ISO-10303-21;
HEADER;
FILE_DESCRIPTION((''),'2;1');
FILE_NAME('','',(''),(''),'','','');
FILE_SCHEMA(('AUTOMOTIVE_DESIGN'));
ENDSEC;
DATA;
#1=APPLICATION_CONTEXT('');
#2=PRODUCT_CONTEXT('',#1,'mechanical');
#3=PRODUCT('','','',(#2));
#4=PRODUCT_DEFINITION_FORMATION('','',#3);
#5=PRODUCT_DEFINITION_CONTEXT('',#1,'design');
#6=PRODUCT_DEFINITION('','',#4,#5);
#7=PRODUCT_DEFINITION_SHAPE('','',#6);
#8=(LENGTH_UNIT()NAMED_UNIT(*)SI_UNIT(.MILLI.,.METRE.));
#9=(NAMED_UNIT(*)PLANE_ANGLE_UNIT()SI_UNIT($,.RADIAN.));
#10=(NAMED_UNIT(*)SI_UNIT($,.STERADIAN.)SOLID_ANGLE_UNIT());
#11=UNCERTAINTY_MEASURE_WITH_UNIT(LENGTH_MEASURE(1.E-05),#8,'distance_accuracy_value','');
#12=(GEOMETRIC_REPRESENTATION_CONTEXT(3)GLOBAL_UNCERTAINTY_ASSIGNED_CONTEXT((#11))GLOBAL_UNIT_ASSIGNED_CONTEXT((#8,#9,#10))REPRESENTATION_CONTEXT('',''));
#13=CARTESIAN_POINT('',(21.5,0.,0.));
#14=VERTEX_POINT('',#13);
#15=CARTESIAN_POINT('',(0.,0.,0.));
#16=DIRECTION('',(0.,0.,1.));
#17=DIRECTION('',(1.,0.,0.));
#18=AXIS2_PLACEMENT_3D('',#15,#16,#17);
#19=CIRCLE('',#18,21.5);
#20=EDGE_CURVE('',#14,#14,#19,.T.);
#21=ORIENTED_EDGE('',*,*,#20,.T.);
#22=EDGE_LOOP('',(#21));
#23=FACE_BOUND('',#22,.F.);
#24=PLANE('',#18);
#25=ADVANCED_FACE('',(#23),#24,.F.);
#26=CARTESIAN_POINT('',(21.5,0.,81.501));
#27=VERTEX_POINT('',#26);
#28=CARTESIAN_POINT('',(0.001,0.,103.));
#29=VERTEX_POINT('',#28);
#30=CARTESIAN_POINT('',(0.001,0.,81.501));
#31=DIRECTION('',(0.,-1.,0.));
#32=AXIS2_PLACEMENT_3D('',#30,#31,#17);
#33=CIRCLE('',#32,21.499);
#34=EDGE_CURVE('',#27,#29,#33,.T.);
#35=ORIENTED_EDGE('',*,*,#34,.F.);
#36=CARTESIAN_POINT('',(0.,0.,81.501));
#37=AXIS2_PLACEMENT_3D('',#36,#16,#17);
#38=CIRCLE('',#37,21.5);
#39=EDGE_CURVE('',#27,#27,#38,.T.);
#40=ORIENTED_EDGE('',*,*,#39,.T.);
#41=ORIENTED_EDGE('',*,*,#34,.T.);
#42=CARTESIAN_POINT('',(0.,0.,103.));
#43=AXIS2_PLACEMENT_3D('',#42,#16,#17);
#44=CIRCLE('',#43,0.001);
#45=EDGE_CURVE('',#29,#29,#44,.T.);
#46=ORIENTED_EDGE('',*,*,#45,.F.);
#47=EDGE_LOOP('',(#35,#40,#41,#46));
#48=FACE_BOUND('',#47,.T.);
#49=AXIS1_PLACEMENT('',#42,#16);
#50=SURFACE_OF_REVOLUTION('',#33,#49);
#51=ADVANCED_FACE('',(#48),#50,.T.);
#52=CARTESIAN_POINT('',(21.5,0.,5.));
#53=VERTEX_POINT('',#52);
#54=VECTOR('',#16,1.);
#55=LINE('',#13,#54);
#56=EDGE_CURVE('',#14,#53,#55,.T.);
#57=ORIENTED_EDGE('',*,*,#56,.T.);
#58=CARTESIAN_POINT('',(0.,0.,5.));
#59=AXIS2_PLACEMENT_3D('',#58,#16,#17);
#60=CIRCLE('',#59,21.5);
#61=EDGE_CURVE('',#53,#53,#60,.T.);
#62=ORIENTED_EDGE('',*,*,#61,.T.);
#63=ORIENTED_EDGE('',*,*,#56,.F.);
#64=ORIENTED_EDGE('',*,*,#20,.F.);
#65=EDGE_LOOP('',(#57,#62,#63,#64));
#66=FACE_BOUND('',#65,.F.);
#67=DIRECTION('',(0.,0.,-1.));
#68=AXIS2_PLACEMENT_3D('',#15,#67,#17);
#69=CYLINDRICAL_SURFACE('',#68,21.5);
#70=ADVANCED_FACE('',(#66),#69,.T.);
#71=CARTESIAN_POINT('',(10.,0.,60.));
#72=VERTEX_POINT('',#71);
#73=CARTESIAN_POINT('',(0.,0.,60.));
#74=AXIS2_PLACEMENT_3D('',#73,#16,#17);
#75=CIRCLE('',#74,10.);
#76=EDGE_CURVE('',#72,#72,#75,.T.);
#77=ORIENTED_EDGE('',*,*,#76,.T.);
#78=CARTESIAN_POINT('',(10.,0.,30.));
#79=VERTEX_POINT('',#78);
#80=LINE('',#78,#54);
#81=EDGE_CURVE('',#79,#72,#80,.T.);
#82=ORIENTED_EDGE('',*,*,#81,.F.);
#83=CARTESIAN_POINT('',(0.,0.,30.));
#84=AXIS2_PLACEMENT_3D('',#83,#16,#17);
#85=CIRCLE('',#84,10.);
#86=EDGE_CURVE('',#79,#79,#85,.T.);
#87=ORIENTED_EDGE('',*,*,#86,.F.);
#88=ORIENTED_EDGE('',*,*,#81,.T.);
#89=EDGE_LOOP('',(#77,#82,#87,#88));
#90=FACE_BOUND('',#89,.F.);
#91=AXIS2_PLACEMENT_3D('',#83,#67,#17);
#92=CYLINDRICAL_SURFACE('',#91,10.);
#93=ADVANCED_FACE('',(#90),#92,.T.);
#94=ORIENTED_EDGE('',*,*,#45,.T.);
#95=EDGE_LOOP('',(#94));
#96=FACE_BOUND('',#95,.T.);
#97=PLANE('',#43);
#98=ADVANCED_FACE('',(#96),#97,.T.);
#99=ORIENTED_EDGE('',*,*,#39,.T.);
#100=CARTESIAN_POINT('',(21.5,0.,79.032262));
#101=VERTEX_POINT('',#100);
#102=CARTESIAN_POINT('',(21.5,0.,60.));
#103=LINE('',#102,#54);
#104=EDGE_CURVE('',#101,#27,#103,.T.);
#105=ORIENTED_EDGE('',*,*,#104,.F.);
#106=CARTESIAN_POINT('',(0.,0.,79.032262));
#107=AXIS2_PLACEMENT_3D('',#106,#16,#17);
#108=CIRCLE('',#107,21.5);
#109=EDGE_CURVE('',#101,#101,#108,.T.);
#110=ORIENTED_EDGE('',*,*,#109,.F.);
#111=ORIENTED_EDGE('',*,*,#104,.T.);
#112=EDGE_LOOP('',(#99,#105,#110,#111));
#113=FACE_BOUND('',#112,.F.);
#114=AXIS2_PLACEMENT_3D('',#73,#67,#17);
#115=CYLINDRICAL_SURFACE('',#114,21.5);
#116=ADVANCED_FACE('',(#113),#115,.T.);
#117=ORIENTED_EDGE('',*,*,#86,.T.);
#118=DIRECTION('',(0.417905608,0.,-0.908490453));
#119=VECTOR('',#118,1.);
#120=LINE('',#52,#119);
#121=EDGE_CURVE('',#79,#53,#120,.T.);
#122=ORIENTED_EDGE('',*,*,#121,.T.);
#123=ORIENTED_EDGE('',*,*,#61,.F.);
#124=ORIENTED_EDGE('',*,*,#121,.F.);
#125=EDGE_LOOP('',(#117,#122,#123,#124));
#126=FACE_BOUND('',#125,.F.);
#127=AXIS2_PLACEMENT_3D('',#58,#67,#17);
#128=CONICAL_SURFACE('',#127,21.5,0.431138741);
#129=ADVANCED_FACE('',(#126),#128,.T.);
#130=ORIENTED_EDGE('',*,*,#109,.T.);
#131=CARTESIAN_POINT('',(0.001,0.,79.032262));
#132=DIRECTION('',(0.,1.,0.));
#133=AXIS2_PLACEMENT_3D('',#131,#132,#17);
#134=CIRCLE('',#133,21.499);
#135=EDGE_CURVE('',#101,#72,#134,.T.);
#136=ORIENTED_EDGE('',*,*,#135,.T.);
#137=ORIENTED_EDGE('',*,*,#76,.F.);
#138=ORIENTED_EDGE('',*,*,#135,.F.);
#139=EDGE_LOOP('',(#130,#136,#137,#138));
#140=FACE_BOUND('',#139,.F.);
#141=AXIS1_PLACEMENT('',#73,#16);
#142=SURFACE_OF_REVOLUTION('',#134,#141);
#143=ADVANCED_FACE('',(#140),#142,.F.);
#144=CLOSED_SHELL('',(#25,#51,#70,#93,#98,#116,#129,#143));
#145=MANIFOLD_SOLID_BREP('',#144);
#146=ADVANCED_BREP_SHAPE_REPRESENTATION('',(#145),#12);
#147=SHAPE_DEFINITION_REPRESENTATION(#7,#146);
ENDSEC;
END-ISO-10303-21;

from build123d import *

# Parameters (mm, degrees)
F0_R     = 21.5
F1_DEPTH = 30
F2_SIZE2 = 25
F2_SIZE  = 11.5
F3_DEPTH = 30
F4_R     = 21.5
F5_DEPTH = 43


# Not quite as in the source:
# - a fillet or chamfer that OpenCascade refuses, or shapes differently, is made with other operations: its cross-section is extruded or revolved along the edge and cut away or added


with BuildPart() as f1:
    # F0 (on Top) → F1 (new body)
    with BuildSketch(Plane.XY):
        Circle(F0_R)
    extrude(amount=F1_DEPTH)

    # F2
    f2_edges = [f1.edges().sort_by_distance(p)[0] for p in [
        (-21.5, 0, 30),
    ]]
    f2_side = f1.faces().sort_by_distance((0, 0, 30))[0]
    chamfer(f2_edges, length=F2_SIZE, length2=F2_SIZE2, reference=f2_side)

    # F3 (add): a face of the model
    f3_faces = [f1.faces().sort_by_distance(p)[0] for p in [
        (0, 0, 30),
    ]]
    extrude(f3_faces, amount=F3_DEPTH)

    # F4 (on face) → F5 (join)
    with BuildSketch(Plane.XY.offset(60)):
        Circle(F4_R)
    extrude(amount=F5_DEPTH)

    # F6: fillet of radius 21.499 on 2 edges, made by hand

    # F6_s1 → F6_t2 (revolve, cut)
    with BuildSketch(Plane.XZ):
        with BuildLine():
            ThreePointArc((21.5, 81.501), (15.2030886887, 96.7030886887), (0.001, 103))
            Line((0.001, 103), (21.5, 103))
            Line((21.5, 103), (21.5, 81.501))
        make_face()
    revolve(axis=Axis((0, 0, 103), (0, 0, 1)), mode=Mode.SUBTRACT)

    # F6_s3 → F6_t4 (revolve, cut)
    with BuildSketch(Plane.XZ):
        with BuildLine():
            ThreePointArc((21.5, 79.0322620831), (18.4017540878, 67.913842681), (10, 60))
            Line((10, 60), (21.5, 60))
            Line((21.5, 60), (21.5, 79.0322620831))
        make_face()
    revolve(axis=Axis((0, 0, 60), (0, 0, 1)), mode=Mode.SUBTRACT)


solid = f1.part
